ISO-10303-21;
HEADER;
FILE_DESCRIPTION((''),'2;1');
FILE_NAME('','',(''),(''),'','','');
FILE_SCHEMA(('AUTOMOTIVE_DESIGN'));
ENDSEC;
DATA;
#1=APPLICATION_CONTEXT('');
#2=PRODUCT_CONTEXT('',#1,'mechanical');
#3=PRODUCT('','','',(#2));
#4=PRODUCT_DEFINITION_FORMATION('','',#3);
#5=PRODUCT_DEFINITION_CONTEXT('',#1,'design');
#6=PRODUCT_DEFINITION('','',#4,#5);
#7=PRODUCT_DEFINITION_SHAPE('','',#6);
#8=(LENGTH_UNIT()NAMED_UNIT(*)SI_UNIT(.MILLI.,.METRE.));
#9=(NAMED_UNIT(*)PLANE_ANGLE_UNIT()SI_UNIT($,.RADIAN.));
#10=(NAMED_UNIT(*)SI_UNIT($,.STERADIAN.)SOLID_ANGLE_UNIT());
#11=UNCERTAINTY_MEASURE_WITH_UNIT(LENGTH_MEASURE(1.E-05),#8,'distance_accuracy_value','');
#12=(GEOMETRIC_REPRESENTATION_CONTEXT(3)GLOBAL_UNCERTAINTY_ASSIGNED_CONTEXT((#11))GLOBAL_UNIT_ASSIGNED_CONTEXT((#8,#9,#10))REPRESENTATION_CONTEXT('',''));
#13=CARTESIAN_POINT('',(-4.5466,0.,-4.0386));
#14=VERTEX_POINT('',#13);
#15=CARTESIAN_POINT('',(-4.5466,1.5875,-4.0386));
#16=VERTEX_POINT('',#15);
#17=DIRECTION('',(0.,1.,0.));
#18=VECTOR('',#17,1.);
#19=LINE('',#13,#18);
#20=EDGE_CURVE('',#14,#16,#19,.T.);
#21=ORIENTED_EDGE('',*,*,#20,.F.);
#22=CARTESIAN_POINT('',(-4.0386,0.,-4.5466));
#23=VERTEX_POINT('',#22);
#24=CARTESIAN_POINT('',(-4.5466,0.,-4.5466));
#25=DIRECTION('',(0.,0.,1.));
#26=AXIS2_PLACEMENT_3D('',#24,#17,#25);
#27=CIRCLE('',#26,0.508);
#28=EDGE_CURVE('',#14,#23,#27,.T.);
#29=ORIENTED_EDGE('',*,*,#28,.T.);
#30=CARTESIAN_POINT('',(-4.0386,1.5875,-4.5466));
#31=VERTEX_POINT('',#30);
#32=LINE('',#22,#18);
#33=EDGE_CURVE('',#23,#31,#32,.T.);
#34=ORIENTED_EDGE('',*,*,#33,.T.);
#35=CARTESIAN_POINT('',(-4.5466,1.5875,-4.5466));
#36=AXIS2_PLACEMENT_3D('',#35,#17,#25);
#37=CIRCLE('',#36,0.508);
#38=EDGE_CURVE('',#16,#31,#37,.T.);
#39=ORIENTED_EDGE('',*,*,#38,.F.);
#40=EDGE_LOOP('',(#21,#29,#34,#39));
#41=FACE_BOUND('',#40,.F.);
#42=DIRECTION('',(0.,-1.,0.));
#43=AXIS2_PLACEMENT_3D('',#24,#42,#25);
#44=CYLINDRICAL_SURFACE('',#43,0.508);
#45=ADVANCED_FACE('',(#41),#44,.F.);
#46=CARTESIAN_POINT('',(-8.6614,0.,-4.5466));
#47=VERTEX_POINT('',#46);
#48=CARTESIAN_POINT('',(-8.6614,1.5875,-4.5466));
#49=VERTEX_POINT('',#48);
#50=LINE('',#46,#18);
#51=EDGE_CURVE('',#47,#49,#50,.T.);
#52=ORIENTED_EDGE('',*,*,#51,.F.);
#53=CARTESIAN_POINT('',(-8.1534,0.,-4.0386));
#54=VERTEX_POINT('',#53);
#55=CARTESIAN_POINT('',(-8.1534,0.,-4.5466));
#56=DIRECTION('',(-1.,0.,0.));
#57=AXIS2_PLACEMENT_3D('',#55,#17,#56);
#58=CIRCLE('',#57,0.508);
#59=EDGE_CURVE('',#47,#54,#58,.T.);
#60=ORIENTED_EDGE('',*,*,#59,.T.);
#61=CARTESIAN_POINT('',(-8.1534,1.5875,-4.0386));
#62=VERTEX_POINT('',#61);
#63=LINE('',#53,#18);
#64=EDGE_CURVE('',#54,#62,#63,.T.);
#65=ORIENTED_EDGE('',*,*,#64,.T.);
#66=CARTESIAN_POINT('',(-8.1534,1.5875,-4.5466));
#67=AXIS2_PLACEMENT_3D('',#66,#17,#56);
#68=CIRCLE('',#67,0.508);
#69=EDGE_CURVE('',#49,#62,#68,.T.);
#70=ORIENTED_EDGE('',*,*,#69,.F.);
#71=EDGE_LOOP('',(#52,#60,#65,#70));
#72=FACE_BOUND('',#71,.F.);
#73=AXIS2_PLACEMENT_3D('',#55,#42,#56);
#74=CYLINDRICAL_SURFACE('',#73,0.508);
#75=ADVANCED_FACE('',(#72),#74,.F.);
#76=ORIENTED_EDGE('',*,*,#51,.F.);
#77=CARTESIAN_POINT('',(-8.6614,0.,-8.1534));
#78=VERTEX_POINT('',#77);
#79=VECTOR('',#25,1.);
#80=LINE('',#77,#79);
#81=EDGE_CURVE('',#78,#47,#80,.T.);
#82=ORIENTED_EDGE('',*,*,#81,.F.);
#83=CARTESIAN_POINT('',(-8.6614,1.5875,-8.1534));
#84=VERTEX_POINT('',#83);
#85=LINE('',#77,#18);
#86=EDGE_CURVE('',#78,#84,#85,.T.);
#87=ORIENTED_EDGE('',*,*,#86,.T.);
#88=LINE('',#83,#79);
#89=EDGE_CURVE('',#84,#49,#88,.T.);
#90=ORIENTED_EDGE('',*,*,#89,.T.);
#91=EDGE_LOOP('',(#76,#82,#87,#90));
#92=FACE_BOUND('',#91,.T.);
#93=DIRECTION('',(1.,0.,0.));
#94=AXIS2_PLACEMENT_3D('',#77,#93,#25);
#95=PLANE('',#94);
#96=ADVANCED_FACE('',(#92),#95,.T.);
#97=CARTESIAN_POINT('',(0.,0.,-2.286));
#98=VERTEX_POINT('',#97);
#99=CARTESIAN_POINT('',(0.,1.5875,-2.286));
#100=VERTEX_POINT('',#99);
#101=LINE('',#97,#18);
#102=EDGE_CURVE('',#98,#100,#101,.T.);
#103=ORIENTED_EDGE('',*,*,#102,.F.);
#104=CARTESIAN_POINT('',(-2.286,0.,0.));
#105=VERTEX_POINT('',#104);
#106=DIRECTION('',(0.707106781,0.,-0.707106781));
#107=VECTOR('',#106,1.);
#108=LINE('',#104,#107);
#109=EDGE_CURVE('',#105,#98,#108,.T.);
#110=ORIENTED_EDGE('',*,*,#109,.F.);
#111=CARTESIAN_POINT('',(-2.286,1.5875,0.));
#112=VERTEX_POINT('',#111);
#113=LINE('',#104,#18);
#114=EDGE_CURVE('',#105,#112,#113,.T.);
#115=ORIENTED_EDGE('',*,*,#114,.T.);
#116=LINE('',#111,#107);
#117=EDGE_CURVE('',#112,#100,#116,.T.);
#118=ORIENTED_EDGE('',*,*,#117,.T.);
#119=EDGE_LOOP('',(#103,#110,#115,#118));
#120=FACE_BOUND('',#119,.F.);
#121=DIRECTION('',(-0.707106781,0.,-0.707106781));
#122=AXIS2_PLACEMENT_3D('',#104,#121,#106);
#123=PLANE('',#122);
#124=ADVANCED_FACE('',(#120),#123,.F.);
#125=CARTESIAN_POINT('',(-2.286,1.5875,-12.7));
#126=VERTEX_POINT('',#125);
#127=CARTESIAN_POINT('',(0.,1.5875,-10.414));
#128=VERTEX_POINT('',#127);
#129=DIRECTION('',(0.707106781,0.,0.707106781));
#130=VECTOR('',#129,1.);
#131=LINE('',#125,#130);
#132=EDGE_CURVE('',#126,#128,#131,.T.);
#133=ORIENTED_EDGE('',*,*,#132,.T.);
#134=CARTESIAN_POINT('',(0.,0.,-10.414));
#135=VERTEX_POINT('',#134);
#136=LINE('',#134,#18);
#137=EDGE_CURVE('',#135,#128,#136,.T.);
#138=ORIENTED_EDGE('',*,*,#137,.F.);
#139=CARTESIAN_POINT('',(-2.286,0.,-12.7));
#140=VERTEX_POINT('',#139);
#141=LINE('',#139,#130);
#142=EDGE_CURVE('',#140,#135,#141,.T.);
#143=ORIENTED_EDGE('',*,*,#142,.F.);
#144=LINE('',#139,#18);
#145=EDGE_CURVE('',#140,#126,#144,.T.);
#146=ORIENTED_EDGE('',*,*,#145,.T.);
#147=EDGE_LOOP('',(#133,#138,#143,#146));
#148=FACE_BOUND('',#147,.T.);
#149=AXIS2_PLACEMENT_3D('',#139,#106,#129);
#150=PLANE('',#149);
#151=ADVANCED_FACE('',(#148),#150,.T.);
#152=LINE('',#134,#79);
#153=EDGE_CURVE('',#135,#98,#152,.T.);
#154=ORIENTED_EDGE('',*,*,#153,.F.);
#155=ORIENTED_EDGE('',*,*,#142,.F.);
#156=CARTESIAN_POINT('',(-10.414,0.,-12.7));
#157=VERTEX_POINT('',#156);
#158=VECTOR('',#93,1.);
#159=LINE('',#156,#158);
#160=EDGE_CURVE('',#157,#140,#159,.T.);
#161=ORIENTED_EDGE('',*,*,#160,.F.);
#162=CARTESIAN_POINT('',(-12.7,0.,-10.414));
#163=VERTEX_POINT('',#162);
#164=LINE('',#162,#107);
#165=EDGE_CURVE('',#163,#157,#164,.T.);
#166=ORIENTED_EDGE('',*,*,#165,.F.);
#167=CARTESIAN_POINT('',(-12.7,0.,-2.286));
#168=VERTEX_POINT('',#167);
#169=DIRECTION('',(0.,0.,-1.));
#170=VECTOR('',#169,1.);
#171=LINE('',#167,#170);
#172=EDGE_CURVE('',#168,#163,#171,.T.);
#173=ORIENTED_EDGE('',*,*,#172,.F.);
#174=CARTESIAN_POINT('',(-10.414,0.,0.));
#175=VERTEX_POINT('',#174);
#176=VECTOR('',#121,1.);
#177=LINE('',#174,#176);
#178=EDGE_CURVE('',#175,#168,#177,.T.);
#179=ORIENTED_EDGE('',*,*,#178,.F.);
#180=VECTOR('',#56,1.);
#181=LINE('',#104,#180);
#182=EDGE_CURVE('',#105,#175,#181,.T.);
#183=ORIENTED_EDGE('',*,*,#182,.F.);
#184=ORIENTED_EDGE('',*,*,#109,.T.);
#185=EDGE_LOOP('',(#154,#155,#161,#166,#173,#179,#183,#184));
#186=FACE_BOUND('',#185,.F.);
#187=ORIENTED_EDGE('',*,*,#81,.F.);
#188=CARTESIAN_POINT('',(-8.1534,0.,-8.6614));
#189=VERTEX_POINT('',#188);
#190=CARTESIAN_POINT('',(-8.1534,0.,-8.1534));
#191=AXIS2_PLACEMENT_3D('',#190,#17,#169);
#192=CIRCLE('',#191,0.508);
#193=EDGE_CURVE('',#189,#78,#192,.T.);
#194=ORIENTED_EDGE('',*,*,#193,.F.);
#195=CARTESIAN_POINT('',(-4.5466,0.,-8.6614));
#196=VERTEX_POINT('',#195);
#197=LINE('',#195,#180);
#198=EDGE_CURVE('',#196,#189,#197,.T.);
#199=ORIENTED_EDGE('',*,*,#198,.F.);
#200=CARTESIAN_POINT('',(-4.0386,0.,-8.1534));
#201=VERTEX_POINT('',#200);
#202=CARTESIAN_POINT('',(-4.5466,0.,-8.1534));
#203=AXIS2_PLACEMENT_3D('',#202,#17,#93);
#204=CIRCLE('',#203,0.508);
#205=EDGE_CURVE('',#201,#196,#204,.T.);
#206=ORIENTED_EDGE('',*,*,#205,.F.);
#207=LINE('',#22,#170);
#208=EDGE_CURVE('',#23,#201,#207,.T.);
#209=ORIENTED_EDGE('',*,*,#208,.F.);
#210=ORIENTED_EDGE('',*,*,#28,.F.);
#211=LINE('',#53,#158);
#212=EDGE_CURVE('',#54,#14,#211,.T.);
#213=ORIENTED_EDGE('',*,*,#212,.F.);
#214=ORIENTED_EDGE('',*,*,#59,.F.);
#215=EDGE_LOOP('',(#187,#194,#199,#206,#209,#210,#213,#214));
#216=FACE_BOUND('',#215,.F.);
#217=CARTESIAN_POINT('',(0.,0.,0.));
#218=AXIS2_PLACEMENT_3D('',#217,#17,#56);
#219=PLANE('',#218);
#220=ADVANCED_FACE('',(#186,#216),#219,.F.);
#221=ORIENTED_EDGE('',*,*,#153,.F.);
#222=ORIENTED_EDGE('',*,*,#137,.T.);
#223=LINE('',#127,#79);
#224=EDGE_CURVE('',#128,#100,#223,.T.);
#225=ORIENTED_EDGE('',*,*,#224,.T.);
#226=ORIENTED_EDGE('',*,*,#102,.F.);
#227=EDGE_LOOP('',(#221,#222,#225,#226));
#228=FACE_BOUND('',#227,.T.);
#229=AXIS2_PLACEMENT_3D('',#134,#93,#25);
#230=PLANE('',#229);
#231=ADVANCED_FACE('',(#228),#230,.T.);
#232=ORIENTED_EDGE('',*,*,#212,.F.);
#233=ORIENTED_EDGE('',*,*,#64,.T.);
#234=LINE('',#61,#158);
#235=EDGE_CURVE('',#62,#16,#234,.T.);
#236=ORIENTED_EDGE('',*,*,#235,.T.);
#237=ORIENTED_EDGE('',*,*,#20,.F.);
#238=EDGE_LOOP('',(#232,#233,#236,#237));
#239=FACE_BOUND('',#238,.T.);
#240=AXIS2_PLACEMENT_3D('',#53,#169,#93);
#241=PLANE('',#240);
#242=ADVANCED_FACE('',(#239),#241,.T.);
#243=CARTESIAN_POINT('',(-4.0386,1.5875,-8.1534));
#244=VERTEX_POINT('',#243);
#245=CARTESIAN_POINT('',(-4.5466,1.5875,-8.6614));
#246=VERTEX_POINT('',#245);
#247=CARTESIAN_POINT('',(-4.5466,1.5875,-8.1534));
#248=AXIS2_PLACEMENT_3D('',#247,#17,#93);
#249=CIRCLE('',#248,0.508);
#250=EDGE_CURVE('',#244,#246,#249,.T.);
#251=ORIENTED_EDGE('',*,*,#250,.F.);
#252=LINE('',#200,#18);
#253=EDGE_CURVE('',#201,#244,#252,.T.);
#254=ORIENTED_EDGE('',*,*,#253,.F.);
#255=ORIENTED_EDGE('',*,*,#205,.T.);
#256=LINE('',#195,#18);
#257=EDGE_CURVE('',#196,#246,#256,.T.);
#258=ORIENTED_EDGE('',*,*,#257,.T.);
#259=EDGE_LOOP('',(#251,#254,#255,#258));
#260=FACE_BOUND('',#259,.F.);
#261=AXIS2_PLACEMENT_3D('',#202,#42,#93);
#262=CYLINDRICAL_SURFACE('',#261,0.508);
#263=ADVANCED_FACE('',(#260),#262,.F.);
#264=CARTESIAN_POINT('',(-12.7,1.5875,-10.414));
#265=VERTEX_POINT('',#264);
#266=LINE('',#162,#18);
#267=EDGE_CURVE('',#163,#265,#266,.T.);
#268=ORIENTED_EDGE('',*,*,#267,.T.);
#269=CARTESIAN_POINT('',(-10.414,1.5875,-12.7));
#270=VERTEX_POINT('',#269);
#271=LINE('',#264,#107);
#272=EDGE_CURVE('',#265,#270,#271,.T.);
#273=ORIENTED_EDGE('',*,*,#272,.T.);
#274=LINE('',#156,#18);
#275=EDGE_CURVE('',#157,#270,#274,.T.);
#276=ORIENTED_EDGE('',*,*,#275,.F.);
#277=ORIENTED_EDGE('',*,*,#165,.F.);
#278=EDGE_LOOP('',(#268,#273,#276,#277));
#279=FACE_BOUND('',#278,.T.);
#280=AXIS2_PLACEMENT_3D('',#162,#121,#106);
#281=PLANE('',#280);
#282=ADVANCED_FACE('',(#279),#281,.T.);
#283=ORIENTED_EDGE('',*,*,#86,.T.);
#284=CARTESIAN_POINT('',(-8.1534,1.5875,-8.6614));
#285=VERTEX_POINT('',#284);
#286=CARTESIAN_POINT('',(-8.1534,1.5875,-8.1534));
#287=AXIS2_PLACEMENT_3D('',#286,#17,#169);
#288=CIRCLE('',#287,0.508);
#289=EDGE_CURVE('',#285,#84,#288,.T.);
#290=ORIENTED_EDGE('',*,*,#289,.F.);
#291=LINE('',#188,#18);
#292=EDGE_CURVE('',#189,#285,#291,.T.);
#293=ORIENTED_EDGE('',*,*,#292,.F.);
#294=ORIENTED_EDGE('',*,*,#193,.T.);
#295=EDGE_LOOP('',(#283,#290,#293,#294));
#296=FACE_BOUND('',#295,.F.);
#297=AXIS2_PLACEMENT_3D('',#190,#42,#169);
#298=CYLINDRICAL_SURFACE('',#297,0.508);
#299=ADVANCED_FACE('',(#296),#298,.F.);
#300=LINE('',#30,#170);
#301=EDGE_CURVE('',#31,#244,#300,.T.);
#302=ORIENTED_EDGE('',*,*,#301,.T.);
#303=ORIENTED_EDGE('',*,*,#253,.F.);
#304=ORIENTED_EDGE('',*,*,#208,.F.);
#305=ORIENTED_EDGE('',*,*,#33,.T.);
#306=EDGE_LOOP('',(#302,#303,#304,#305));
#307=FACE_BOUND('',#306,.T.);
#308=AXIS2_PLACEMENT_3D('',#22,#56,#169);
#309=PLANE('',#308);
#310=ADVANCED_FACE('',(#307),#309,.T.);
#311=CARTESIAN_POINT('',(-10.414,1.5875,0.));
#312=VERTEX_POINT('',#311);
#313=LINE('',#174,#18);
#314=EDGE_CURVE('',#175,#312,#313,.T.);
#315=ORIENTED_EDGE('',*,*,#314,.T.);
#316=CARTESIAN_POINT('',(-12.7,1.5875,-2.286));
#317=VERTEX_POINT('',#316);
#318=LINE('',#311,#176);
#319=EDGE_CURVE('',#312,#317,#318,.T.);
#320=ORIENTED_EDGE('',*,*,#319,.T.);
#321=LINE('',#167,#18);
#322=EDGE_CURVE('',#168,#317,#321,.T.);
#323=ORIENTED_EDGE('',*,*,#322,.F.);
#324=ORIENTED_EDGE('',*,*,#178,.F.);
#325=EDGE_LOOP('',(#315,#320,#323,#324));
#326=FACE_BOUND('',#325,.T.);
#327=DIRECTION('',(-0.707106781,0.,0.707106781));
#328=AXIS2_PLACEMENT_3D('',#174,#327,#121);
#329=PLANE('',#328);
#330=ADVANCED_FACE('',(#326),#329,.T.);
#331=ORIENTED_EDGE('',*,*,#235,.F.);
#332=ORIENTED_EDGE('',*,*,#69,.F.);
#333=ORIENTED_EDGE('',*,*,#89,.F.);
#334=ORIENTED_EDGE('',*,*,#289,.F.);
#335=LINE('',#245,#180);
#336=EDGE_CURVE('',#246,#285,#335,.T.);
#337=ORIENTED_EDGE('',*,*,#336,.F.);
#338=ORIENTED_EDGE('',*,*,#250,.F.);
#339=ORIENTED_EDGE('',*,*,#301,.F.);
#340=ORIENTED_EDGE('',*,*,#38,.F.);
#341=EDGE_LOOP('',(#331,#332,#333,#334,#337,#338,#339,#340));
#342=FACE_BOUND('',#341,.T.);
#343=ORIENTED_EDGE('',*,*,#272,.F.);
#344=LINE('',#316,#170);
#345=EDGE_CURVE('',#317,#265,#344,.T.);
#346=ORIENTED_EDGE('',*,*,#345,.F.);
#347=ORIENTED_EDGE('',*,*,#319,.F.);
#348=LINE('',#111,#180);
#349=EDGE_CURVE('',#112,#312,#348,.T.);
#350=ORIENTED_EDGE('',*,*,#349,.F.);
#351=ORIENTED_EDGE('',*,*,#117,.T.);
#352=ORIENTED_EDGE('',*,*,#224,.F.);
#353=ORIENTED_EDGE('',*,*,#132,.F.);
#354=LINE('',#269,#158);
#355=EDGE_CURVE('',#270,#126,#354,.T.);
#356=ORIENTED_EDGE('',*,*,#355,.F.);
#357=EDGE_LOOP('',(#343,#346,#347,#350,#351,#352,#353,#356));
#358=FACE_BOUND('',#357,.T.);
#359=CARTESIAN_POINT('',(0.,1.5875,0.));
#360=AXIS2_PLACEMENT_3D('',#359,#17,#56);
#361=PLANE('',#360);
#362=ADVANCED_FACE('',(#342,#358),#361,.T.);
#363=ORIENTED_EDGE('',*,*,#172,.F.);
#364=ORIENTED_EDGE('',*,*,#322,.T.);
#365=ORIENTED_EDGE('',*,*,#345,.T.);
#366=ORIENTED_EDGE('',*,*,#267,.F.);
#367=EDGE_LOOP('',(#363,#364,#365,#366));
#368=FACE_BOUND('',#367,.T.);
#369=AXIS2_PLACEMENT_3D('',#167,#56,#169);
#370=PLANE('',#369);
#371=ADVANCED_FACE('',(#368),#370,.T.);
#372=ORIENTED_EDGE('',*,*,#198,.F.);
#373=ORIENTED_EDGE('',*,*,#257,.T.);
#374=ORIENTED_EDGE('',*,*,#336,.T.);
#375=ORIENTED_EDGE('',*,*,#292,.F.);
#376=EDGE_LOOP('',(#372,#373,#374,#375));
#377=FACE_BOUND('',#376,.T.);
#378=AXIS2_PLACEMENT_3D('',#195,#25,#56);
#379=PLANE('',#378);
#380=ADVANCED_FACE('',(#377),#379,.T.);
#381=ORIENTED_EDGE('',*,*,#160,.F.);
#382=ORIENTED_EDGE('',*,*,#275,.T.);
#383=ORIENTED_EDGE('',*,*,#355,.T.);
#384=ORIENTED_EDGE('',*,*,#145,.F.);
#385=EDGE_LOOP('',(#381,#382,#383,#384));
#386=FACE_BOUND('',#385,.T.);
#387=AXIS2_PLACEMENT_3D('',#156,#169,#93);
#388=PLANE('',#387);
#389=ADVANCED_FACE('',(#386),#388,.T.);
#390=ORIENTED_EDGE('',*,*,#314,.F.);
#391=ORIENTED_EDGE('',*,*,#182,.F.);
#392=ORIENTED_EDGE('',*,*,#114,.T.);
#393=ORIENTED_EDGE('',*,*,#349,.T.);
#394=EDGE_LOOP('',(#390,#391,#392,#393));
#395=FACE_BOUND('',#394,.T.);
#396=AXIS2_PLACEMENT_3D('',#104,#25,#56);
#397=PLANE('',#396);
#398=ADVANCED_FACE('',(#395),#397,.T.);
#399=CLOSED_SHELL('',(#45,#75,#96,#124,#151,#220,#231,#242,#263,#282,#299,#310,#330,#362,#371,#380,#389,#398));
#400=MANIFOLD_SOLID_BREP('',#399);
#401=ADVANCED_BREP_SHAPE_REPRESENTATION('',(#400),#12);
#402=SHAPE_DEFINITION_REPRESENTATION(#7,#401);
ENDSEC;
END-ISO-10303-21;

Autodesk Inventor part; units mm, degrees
ref_plane "YZ Plane" through (0, 0, 0) normal (1, 0, 0) x (0, 1, 0)
ref_plane "XZ Plane" through (0, 0, 0) normal (0, 1, 0) x (-1, 0, 0)
ref_plane "XY Plane" through (0, 0, 0) normal (0, 0, 1) x (1, 0, 0)
sketch "Sketch1" plane through (0, 0, 0) normal (0, 1, 0) x (-1, 0, 0)
  line L0 (2.286, 0) -> (10.414, 0)
  line L1 (12.7, -2.286) -> (12.7, -10.414)
  line L2 (10.414, -12.7) -> (2.286, -12.7)
  line L3 (0, -10.414) -> (0, -2.286)
  line L4 (8.1534, -4.0386) -> (4.5466, -4.0386)
  line L5 (4.0386, -4.5466) -> (4.0386, -8.1534)
  line L6 (4.5466, -8.6614) -> (8.1534, -8.6614)
  line L7 (8.6614, -8.1534) -> (8.6614, -4.5466)
  line L8 (10.414, 0) -> (12.7, -2.286)
  line L9 (12.7, -10.414) -> (10.414, -12.7)
  line L10 (2.286, -12.7) -> (0, -10.414)
  line L11 (2.286, 0) -> (0, -2.286)
  arc A0 (8.6614, -4.5466) -> (8.1534, -4.0386) centre (8.1534, -4.5466) ccw
  arc A1 (8.1534, -8.6614) -> (8.6614, -8.1534) centre (8.1534, -8.1534) ccw
  arc A2 (4.0386, -8.1534) -> (4.5466, -8.6614) centre (4.5466, -8.1534) ccw
  arc A3 (4.5466, -4.0386) -> (4.0386, -4.5466) centre (4.5466, -4.5466) ccw
  line L12 (8.1534, -4.5466) -> (4.5466, -8.1534) construction
  line L13 (12.7, -10.414) -> (0, -2.286) construction
  point P0 (0, 0)
  point P1 (12.7, -12.7)
  point P2 (12.7, 0)
  point P3 (0, -12.7)
  point P4 (4.0386, -8.6614)
  point P5 (8.6614, -8.6614)
  point P6 (6.35, -6.35)
  dimension "d1" = 12.7
  dimension "d2" = 4.6228
  dimension "d3" = 2.286
  dimension "d4" = 2.286
  dimension "d5" = 2.286
  dimension "d6" = 2.286
  dimension "d7" = 2.286
  dimension "d8" = 2.286
  dimension "d9" = 2.286
  dimension "d10" = 2.286
  dimension "d11" = 0.508
extrude "Body" add sketch "Sketch1" along normal blind 1.5875
sketch "Sketch2" plane through (0, 1.5875, 0) normal (0, 1, 0) x (1, 0, 0)
  arc A0 (-8.1534, 8.6614) -> (-8.6614, 8.1534) centre (-8.1534, 8.1534) ccw construction
  arc A1 (-4.5466, 4.0386) -> (-4.0386, 4.5466) centre (-4.5466, 4.5466) ccw construction
  circle A2 centre (-6.35, 6.35) radius 2.1844
  line L0 (-8.1534, 8.1534) -> (-4.5466, 4.5466) construction
  point P0 (0, 0)
  dimension "d14" = 4.3688
surface extrude "Circle" sketch "Sketch2" against normal up to surface (1.5875 mm away) shown yes curves A2
pattern_of_one "Rectangular Pattern1"
equation "\"d4\" = d3"
equation "\"d5\" = d3"
equation "\"d6\" = d5"
equation "\"d7\" = d3"
equation "\"d8\" = d7"
equation "\"d9\" = d3"
equation "\"d10\" = d9"
equation "\"d22\" = d19"
equation "\"d19\" = 12.7"
